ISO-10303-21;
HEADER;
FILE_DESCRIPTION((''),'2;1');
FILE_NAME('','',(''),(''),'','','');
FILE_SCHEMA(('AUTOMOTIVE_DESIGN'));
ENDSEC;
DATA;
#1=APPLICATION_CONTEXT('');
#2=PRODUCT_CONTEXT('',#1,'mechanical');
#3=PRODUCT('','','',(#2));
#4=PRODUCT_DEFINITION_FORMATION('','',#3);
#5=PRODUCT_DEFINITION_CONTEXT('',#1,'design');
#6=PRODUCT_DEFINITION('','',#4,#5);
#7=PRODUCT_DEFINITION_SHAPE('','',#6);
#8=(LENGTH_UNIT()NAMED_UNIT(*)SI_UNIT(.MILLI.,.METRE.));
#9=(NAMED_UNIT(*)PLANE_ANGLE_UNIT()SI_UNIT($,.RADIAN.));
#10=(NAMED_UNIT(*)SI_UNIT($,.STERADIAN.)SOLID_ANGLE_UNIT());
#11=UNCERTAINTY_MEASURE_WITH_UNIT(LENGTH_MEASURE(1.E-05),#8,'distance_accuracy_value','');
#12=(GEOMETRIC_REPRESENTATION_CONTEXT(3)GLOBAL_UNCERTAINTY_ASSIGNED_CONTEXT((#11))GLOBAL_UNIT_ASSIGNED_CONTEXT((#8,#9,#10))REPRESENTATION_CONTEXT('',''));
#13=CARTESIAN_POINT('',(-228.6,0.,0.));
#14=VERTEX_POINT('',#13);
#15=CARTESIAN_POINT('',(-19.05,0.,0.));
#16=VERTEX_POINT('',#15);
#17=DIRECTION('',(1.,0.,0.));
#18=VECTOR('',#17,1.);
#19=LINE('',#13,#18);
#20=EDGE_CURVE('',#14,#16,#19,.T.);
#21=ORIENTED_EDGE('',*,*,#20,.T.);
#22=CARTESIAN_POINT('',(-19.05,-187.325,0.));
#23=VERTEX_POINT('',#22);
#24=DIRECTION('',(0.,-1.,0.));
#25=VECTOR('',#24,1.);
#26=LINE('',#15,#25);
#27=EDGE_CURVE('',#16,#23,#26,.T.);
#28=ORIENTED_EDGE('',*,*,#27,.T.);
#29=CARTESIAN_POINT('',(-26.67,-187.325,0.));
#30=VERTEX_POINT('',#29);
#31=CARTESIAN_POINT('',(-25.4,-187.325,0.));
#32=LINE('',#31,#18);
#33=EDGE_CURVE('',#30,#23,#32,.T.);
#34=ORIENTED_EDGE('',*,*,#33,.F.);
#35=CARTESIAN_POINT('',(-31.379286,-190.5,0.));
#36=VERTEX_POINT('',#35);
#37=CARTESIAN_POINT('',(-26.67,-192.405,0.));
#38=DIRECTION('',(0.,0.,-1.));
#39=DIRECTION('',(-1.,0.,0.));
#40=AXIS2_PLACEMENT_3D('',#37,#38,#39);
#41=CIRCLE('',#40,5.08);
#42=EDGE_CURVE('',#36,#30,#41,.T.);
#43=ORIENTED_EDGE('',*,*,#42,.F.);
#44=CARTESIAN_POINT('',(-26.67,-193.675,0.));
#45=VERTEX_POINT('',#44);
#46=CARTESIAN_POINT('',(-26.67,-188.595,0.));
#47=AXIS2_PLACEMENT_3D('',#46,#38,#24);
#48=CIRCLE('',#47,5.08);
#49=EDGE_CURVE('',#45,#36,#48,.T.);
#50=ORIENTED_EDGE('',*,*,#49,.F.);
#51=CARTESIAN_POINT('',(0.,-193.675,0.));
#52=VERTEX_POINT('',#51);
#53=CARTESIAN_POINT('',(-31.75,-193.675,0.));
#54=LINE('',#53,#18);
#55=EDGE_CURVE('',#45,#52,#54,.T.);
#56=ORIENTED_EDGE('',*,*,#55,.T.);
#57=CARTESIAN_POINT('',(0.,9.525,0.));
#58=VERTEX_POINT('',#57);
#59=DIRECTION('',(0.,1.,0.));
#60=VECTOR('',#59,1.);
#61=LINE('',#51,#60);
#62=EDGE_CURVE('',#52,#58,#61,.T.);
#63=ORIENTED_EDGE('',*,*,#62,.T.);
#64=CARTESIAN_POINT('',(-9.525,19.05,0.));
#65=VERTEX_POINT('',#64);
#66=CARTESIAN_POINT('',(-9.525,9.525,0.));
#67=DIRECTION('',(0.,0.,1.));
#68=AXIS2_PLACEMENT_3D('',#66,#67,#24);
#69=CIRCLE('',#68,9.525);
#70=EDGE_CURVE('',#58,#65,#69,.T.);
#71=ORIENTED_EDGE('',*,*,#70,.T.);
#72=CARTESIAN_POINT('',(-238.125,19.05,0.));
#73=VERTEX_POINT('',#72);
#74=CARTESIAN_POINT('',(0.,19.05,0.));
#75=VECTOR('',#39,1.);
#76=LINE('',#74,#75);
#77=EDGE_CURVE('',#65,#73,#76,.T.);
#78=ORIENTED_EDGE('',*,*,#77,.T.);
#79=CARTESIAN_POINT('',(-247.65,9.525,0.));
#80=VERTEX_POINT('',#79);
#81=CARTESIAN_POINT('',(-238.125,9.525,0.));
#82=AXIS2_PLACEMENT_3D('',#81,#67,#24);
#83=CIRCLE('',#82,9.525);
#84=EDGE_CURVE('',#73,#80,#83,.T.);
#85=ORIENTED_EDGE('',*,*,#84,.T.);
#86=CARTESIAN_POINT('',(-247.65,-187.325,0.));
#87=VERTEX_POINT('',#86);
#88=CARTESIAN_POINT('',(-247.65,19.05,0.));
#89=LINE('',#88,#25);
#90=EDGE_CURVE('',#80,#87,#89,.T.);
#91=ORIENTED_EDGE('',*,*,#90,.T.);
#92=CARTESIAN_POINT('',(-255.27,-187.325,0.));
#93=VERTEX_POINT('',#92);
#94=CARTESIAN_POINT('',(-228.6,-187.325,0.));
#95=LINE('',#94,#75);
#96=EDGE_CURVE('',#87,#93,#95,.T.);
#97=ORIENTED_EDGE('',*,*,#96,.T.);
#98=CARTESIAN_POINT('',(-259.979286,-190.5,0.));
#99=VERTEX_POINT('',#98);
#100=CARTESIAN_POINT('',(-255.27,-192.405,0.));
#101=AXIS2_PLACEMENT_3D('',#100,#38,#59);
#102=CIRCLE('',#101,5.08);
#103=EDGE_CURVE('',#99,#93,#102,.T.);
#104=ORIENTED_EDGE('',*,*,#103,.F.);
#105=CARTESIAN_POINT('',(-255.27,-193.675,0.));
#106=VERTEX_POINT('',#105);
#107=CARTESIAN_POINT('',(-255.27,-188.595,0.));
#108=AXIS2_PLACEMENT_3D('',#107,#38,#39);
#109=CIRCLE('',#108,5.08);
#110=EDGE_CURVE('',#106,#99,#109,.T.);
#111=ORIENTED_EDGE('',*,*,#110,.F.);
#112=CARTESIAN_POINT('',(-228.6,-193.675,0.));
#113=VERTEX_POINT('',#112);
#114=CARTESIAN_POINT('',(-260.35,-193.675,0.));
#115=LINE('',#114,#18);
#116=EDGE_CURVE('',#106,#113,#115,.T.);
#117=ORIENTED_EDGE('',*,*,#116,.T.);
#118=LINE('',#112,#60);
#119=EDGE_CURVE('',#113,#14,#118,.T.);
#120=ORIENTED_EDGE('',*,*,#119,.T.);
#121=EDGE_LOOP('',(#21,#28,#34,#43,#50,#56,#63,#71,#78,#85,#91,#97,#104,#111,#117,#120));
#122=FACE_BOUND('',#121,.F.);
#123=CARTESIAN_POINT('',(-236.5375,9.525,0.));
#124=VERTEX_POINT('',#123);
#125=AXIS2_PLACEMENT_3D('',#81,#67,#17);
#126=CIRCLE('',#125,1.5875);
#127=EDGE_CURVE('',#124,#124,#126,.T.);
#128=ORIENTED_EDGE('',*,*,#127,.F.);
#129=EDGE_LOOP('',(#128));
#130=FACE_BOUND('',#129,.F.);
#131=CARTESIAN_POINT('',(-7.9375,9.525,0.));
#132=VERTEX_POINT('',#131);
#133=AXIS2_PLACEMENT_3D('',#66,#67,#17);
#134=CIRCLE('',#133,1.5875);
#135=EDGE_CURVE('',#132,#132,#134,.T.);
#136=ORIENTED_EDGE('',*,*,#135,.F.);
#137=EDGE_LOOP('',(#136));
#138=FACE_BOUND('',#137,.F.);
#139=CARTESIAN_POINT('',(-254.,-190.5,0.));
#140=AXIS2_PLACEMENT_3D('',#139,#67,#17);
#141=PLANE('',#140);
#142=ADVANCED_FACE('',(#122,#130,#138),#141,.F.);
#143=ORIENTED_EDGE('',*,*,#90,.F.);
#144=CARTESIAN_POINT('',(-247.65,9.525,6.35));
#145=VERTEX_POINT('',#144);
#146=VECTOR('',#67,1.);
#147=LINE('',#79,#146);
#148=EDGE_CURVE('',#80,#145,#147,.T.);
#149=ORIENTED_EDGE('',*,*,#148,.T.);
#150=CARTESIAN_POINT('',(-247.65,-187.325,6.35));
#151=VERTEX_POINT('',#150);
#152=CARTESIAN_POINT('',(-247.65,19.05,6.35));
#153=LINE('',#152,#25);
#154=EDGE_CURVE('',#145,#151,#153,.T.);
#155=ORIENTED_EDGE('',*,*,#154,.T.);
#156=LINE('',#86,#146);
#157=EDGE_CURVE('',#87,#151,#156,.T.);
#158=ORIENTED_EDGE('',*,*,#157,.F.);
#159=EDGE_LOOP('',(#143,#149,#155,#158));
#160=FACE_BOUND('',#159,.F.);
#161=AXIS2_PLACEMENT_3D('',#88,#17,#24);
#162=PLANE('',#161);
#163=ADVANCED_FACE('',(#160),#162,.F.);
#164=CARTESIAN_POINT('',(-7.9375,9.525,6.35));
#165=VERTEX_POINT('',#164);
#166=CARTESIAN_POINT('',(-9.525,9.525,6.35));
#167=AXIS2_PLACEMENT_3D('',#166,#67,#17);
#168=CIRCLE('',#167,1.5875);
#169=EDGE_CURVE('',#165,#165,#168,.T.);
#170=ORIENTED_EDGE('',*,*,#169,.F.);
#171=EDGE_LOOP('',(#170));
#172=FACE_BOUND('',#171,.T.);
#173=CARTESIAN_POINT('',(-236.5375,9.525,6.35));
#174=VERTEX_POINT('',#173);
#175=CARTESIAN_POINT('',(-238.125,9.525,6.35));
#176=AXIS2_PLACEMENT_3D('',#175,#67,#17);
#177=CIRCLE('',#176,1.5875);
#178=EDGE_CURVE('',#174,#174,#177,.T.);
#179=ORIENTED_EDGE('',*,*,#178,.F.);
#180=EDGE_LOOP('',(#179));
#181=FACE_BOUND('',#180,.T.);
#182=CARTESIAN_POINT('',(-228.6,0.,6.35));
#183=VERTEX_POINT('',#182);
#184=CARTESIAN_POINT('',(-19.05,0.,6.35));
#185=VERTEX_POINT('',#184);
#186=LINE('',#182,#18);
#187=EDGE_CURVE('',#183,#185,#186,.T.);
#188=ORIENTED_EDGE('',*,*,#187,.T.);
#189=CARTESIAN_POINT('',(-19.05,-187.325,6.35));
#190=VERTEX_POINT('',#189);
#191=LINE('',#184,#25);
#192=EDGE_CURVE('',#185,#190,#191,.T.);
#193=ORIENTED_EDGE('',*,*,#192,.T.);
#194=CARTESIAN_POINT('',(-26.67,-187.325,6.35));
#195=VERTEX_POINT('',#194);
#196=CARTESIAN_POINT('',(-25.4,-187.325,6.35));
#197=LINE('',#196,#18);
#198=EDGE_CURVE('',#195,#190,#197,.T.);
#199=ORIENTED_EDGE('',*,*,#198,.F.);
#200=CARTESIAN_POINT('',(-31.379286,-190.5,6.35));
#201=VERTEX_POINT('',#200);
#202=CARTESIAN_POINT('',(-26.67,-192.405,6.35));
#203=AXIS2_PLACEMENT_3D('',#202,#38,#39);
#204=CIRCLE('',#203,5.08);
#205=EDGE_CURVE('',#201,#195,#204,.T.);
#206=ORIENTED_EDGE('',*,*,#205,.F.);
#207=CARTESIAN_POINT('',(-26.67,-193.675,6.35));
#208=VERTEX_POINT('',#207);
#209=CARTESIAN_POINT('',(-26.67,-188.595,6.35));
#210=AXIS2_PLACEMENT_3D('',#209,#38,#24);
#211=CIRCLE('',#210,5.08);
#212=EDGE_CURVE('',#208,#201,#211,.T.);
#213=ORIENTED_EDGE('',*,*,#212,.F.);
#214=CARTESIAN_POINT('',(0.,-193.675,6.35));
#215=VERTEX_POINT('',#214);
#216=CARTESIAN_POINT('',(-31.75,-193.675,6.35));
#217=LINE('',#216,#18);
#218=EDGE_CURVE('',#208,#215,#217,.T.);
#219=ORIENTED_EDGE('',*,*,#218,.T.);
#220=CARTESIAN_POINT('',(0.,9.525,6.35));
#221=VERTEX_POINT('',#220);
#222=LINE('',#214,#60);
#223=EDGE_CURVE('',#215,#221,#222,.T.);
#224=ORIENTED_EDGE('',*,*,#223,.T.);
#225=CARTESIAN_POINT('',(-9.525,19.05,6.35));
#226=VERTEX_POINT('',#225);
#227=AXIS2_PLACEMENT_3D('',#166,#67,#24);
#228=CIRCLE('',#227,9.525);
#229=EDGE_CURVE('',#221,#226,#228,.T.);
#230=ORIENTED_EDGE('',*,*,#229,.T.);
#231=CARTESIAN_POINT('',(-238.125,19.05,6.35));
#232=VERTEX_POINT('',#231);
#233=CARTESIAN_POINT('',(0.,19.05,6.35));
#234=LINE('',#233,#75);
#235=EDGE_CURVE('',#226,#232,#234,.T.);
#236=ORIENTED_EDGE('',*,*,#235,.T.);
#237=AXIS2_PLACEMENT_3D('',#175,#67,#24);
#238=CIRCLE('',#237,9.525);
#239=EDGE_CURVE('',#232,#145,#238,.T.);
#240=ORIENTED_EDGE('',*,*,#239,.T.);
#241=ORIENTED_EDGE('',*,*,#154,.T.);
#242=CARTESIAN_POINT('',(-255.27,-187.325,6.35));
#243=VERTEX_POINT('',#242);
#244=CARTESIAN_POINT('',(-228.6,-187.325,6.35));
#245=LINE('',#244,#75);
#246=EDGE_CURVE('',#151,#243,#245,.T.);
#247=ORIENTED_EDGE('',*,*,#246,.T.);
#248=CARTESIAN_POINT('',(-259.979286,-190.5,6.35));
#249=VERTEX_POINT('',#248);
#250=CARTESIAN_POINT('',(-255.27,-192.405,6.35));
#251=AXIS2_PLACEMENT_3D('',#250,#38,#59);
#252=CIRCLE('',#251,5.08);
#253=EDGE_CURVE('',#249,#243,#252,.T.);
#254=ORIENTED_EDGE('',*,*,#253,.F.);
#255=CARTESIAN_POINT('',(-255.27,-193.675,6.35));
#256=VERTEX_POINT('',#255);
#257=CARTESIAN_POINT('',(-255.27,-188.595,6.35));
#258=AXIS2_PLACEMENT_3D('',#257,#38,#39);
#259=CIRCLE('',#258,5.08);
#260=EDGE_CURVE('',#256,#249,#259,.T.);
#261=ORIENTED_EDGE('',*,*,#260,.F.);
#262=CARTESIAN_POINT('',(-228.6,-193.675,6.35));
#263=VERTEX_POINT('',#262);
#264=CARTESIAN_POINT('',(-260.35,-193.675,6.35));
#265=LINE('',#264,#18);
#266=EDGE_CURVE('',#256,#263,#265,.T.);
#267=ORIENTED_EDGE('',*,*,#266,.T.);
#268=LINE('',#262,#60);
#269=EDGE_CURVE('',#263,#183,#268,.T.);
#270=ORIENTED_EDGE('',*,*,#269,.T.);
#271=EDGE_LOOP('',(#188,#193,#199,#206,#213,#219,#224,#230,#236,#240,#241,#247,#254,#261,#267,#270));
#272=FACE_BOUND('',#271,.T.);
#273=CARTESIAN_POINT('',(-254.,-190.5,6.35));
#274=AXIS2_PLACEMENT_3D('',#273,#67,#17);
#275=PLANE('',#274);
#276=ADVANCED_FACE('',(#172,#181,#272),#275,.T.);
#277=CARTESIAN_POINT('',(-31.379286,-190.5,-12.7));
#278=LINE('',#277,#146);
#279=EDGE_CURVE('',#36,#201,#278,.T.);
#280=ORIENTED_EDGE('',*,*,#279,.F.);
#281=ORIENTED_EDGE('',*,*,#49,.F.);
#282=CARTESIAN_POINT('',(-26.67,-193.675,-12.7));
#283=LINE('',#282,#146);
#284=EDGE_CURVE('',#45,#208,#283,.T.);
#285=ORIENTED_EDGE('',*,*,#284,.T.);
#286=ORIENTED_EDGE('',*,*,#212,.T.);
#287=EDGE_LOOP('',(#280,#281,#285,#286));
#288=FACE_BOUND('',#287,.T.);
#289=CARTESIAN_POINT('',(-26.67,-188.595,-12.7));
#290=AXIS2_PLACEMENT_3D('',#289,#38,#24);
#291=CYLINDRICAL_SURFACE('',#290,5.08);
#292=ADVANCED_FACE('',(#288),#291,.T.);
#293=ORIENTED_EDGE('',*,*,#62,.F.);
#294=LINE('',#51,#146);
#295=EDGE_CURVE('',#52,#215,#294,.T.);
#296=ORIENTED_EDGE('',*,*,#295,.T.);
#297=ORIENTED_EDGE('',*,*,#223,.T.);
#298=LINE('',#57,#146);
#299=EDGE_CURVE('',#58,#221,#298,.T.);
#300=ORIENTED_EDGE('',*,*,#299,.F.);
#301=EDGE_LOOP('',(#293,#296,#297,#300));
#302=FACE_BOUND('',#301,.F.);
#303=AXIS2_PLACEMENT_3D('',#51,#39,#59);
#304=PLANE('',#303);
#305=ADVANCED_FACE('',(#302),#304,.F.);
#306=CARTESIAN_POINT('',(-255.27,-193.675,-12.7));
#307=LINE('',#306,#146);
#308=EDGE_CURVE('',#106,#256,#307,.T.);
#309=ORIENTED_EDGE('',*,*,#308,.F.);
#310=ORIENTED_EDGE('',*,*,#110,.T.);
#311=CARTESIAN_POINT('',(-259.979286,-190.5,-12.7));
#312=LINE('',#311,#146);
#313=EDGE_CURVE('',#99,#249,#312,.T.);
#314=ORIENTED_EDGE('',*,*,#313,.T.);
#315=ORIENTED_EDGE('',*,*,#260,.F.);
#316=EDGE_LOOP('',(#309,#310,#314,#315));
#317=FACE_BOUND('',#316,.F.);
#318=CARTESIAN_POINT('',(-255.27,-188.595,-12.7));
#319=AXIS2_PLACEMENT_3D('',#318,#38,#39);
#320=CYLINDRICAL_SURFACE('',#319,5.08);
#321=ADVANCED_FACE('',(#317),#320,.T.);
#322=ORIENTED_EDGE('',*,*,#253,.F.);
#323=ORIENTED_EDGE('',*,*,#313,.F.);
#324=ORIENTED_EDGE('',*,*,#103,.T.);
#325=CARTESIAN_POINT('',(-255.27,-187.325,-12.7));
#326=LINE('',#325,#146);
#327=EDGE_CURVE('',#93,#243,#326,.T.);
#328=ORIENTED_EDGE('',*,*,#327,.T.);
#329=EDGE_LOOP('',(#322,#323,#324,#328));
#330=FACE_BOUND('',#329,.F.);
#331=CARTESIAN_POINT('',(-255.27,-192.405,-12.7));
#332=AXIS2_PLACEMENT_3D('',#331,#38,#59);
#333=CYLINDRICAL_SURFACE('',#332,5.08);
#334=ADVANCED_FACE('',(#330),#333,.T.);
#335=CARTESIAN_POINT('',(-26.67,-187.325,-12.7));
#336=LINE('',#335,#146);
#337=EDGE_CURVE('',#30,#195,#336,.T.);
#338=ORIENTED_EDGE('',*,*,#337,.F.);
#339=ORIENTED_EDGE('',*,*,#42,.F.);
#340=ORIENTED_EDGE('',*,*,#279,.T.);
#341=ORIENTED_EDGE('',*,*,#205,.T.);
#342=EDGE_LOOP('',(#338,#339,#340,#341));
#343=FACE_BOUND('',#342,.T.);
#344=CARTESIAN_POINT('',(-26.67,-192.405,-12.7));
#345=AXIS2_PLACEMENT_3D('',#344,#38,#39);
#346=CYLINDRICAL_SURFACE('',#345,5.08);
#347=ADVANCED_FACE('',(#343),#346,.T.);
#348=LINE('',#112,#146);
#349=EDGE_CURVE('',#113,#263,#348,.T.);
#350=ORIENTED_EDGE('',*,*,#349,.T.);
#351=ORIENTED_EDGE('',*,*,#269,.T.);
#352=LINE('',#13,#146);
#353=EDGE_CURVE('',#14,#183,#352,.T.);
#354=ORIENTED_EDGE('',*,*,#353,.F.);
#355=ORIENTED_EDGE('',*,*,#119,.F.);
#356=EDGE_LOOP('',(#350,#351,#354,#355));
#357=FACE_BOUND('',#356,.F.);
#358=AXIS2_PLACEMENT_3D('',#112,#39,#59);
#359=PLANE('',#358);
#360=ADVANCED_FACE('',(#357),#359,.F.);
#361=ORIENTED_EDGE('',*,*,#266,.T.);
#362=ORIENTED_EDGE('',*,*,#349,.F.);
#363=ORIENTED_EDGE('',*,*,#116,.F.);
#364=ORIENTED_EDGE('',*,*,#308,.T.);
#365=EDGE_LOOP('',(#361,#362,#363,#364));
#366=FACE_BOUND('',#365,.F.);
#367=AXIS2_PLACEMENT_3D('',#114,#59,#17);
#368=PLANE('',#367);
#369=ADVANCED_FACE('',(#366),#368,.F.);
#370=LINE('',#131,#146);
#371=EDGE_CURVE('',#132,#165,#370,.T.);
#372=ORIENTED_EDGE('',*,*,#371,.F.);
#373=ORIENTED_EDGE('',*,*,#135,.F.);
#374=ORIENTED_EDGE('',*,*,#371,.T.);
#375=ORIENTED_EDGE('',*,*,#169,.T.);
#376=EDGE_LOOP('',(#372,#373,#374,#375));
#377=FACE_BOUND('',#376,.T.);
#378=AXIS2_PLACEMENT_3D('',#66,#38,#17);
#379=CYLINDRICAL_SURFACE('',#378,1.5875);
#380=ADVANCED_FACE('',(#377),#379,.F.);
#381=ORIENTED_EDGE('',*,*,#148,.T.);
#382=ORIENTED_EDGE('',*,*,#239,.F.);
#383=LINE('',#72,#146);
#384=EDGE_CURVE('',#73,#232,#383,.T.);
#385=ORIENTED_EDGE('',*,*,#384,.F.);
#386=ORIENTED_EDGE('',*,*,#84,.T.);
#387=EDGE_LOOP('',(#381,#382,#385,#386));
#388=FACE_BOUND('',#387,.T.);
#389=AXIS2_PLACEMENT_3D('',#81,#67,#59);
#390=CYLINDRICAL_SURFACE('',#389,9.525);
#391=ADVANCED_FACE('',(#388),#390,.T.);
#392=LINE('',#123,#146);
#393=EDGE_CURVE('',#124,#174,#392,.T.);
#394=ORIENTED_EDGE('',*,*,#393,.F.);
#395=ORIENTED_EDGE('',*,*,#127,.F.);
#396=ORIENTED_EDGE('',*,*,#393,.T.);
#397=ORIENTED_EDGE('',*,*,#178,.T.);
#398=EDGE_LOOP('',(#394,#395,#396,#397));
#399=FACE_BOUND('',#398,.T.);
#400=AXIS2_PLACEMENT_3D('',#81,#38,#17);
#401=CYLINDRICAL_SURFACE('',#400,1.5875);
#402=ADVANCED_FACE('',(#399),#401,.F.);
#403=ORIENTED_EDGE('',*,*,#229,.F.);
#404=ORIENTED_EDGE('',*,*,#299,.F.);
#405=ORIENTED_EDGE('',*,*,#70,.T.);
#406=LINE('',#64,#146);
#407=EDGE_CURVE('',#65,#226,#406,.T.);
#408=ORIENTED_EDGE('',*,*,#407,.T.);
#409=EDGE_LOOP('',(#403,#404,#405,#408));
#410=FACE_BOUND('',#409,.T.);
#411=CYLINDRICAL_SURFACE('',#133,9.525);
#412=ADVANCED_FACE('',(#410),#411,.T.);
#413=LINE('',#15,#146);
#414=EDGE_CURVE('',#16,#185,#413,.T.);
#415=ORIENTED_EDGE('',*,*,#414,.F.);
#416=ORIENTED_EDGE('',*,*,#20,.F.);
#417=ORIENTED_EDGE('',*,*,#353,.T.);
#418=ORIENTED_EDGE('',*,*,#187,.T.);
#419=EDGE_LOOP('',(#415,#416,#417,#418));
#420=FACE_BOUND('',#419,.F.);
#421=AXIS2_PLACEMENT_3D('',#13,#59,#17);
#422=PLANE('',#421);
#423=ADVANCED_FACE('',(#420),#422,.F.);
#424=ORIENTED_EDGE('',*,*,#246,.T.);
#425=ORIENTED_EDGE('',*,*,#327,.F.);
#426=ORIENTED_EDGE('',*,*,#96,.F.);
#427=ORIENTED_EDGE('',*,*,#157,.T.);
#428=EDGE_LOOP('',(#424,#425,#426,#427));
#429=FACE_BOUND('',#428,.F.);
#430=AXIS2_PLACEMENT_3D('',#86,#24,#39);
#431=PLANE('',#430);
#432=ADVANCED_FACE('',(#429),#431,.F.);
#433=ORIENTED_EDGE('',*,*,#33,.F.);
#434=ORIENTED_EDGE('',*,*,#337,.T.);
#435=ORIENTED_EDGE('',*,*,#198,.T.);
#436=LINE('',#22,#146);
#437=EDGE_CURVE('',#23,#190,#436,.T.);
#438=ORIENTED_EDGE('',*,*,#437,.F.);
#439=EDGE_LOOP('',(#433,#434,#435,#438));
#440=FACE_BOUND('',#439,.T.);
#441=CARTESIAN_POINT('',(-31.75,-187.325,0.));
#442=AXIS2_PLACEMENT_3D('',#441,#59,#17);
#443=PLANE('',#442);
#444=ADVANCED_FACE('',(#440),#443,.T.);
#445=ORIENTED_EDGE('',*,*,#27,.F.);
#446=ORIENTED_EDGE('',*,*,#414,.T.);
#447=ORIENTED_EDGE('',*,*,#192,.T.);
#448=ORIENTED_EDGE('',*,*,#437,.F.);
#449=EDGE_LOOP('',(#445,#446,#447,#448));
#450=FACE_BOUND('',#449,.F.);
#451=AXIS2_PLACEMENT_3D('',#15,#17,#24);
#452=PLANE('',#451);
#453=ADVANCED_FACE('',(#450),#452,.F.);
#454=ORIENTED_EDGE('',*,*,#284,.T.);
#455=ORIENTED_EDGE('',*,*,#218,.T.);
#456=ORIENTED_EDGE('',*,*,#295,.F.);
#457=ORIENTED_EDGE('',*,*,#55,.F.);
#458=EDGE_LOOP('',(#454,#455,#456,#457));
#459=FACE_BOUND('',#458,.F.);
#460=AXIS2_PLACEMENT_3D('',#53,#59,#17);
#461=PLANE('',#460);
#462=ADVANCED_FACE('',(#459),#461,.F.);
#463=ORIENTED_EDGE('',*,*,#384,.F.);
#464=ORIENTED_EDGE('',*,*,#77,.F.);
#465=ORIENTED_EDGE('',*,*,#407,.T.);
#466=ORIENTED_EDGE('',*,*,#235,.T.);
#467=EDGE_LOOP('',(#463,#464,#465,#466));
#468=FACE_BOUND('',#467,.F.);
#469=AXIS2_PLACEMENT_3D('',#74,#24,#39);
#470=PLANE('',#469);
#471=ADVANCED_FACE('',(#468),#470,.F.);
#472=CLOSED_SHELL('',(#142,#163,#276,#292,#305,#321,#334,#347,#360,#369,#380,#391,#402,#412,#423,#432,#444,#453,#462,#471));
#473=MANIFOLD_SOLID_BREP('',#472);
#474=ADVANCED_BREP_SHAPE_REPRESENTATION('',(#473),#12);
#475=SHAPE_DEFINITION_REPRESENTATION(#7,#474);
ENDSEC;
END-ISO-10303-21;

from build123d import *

# Parameters (mm, degrees)
F0_W        = 12.7
F0_H        = 6.35
F0_W_2      = 19.05
F0_H_2      = 187.325
F0_H_3      = 19.05
F0_R        = 1.5875
F0_W_3      = 209.55
F1_DEPTH    = 6.35
F2_R        = 9.525
F3_T1_DEPTH = 31.75


# Not quite as in the source:
# - a fillet or chamfer that OpenCascade refuses, or shapes differently, is made with other operations: its cross-section is extruded or revolved along the edge and cut away or added
# - a length typed as a fraction of an inch, garbled in the dataset ("3 / 203.2 mm" for 3/8 in), is restored


with BuildPart() as f1:
    # F0 (on Top) → F1 (new body)
    with BuildSketch(Plane.XY):
        with Locations((-254, -190.5)):
            Rectangle(F0_W, F0_H)
        with Locations((-238.125, -190.5)):
            Rectangle(F0_W_2, F0_H)
        with Locations((-238.125, -93.6625)):
            Rectangle(F0_W_2, F0_H_2)
        with Locations((-238.125, 9.525)):
            Rectangle(F0_W_2, F0_H_3)
        with Locations((-238.125, 9.525)):
            Circle(F0_R, mode=Mode.SUBTRACT)
        with Locations((-123.825, 9.525)):
            Rectangle(F0_W_3, F0_H_3)
        with Locations((-9.525, 9.525)):
            Rectangle(F0_W_2, F0_H_3)
        with Locations((-9.525, 9.525)):
            Circle(F0_R, mode=Mode.SUBTRACT)
        with Locations((-9.525, -93.6625)):
            Rectangle(F0_W_2, F0_H_2)
        with Locations((-9.525, -190.5)):
            Rectangle(F0_W_2, F0_H)
        with Locations((-25.4, -190.5)):
            Rectangle(F0_W, F0_H)
    extrude(amount=F1_DEPTH)

    # F2
    f2_edges = [f1.edges().sort_by_distance(p)[0] for p in [
        (0, 19.05, 3.175),
        (-247.65, 19.05, 3.175),
    ]]
    fillet(f2_edges, radius=F2_R)

    # F3: fillet of radius 5.08 on 4 edges, made by hand

    # F3_s2 → F3_t1 (cut)
    with BuildSketch(Plane.XY.offset(-12.7)):
        with BuildLine():
            ThreePointArc((-255.27, -187.325), (-258.8621024484, -188.8128975516), (-260.35, -192.405))
            Line((-260.35, -192.405), (-260.35, -187.325))
            Line((-260.35, -187.325), (-255.27, -187.325))
        make_face()
        with BuildLine():
            ThreePointArc((-31.75, -192.405), (-30.2621024484, -188.8128975516), (-26.67, -187.325))
            Line((-26.67, -187.325), (-31.75, -187.325))
            Line((-31.75, -187.325), (-31.75, -192.405))
        make_face()
        with BuildLine():
            ThreePointArc((-260.35, -188.595), (-258.8621024484, -192.1871024484), (-255.27, -193.675))
            Line((-255.27, -193.675), (-260.35, -193.675))
            Line((-260.35, -193.675), (-260.35, -188.595))
        make_face()
        with BuildLine():
            ThreePointArc((-26.67, -193.675), (-30.2621024484, -192.1871024484), (-31.75, -188.595))
            Line((-31.75, -188.595), (-31.75, -193.675))
            Line((-31.75, -193.675), (-26.67, -193.675))
        make_face()
    extrude(amount=F3_T1_DEPTH, mode=Mode.SUBTRACT)


solid = f1.part
